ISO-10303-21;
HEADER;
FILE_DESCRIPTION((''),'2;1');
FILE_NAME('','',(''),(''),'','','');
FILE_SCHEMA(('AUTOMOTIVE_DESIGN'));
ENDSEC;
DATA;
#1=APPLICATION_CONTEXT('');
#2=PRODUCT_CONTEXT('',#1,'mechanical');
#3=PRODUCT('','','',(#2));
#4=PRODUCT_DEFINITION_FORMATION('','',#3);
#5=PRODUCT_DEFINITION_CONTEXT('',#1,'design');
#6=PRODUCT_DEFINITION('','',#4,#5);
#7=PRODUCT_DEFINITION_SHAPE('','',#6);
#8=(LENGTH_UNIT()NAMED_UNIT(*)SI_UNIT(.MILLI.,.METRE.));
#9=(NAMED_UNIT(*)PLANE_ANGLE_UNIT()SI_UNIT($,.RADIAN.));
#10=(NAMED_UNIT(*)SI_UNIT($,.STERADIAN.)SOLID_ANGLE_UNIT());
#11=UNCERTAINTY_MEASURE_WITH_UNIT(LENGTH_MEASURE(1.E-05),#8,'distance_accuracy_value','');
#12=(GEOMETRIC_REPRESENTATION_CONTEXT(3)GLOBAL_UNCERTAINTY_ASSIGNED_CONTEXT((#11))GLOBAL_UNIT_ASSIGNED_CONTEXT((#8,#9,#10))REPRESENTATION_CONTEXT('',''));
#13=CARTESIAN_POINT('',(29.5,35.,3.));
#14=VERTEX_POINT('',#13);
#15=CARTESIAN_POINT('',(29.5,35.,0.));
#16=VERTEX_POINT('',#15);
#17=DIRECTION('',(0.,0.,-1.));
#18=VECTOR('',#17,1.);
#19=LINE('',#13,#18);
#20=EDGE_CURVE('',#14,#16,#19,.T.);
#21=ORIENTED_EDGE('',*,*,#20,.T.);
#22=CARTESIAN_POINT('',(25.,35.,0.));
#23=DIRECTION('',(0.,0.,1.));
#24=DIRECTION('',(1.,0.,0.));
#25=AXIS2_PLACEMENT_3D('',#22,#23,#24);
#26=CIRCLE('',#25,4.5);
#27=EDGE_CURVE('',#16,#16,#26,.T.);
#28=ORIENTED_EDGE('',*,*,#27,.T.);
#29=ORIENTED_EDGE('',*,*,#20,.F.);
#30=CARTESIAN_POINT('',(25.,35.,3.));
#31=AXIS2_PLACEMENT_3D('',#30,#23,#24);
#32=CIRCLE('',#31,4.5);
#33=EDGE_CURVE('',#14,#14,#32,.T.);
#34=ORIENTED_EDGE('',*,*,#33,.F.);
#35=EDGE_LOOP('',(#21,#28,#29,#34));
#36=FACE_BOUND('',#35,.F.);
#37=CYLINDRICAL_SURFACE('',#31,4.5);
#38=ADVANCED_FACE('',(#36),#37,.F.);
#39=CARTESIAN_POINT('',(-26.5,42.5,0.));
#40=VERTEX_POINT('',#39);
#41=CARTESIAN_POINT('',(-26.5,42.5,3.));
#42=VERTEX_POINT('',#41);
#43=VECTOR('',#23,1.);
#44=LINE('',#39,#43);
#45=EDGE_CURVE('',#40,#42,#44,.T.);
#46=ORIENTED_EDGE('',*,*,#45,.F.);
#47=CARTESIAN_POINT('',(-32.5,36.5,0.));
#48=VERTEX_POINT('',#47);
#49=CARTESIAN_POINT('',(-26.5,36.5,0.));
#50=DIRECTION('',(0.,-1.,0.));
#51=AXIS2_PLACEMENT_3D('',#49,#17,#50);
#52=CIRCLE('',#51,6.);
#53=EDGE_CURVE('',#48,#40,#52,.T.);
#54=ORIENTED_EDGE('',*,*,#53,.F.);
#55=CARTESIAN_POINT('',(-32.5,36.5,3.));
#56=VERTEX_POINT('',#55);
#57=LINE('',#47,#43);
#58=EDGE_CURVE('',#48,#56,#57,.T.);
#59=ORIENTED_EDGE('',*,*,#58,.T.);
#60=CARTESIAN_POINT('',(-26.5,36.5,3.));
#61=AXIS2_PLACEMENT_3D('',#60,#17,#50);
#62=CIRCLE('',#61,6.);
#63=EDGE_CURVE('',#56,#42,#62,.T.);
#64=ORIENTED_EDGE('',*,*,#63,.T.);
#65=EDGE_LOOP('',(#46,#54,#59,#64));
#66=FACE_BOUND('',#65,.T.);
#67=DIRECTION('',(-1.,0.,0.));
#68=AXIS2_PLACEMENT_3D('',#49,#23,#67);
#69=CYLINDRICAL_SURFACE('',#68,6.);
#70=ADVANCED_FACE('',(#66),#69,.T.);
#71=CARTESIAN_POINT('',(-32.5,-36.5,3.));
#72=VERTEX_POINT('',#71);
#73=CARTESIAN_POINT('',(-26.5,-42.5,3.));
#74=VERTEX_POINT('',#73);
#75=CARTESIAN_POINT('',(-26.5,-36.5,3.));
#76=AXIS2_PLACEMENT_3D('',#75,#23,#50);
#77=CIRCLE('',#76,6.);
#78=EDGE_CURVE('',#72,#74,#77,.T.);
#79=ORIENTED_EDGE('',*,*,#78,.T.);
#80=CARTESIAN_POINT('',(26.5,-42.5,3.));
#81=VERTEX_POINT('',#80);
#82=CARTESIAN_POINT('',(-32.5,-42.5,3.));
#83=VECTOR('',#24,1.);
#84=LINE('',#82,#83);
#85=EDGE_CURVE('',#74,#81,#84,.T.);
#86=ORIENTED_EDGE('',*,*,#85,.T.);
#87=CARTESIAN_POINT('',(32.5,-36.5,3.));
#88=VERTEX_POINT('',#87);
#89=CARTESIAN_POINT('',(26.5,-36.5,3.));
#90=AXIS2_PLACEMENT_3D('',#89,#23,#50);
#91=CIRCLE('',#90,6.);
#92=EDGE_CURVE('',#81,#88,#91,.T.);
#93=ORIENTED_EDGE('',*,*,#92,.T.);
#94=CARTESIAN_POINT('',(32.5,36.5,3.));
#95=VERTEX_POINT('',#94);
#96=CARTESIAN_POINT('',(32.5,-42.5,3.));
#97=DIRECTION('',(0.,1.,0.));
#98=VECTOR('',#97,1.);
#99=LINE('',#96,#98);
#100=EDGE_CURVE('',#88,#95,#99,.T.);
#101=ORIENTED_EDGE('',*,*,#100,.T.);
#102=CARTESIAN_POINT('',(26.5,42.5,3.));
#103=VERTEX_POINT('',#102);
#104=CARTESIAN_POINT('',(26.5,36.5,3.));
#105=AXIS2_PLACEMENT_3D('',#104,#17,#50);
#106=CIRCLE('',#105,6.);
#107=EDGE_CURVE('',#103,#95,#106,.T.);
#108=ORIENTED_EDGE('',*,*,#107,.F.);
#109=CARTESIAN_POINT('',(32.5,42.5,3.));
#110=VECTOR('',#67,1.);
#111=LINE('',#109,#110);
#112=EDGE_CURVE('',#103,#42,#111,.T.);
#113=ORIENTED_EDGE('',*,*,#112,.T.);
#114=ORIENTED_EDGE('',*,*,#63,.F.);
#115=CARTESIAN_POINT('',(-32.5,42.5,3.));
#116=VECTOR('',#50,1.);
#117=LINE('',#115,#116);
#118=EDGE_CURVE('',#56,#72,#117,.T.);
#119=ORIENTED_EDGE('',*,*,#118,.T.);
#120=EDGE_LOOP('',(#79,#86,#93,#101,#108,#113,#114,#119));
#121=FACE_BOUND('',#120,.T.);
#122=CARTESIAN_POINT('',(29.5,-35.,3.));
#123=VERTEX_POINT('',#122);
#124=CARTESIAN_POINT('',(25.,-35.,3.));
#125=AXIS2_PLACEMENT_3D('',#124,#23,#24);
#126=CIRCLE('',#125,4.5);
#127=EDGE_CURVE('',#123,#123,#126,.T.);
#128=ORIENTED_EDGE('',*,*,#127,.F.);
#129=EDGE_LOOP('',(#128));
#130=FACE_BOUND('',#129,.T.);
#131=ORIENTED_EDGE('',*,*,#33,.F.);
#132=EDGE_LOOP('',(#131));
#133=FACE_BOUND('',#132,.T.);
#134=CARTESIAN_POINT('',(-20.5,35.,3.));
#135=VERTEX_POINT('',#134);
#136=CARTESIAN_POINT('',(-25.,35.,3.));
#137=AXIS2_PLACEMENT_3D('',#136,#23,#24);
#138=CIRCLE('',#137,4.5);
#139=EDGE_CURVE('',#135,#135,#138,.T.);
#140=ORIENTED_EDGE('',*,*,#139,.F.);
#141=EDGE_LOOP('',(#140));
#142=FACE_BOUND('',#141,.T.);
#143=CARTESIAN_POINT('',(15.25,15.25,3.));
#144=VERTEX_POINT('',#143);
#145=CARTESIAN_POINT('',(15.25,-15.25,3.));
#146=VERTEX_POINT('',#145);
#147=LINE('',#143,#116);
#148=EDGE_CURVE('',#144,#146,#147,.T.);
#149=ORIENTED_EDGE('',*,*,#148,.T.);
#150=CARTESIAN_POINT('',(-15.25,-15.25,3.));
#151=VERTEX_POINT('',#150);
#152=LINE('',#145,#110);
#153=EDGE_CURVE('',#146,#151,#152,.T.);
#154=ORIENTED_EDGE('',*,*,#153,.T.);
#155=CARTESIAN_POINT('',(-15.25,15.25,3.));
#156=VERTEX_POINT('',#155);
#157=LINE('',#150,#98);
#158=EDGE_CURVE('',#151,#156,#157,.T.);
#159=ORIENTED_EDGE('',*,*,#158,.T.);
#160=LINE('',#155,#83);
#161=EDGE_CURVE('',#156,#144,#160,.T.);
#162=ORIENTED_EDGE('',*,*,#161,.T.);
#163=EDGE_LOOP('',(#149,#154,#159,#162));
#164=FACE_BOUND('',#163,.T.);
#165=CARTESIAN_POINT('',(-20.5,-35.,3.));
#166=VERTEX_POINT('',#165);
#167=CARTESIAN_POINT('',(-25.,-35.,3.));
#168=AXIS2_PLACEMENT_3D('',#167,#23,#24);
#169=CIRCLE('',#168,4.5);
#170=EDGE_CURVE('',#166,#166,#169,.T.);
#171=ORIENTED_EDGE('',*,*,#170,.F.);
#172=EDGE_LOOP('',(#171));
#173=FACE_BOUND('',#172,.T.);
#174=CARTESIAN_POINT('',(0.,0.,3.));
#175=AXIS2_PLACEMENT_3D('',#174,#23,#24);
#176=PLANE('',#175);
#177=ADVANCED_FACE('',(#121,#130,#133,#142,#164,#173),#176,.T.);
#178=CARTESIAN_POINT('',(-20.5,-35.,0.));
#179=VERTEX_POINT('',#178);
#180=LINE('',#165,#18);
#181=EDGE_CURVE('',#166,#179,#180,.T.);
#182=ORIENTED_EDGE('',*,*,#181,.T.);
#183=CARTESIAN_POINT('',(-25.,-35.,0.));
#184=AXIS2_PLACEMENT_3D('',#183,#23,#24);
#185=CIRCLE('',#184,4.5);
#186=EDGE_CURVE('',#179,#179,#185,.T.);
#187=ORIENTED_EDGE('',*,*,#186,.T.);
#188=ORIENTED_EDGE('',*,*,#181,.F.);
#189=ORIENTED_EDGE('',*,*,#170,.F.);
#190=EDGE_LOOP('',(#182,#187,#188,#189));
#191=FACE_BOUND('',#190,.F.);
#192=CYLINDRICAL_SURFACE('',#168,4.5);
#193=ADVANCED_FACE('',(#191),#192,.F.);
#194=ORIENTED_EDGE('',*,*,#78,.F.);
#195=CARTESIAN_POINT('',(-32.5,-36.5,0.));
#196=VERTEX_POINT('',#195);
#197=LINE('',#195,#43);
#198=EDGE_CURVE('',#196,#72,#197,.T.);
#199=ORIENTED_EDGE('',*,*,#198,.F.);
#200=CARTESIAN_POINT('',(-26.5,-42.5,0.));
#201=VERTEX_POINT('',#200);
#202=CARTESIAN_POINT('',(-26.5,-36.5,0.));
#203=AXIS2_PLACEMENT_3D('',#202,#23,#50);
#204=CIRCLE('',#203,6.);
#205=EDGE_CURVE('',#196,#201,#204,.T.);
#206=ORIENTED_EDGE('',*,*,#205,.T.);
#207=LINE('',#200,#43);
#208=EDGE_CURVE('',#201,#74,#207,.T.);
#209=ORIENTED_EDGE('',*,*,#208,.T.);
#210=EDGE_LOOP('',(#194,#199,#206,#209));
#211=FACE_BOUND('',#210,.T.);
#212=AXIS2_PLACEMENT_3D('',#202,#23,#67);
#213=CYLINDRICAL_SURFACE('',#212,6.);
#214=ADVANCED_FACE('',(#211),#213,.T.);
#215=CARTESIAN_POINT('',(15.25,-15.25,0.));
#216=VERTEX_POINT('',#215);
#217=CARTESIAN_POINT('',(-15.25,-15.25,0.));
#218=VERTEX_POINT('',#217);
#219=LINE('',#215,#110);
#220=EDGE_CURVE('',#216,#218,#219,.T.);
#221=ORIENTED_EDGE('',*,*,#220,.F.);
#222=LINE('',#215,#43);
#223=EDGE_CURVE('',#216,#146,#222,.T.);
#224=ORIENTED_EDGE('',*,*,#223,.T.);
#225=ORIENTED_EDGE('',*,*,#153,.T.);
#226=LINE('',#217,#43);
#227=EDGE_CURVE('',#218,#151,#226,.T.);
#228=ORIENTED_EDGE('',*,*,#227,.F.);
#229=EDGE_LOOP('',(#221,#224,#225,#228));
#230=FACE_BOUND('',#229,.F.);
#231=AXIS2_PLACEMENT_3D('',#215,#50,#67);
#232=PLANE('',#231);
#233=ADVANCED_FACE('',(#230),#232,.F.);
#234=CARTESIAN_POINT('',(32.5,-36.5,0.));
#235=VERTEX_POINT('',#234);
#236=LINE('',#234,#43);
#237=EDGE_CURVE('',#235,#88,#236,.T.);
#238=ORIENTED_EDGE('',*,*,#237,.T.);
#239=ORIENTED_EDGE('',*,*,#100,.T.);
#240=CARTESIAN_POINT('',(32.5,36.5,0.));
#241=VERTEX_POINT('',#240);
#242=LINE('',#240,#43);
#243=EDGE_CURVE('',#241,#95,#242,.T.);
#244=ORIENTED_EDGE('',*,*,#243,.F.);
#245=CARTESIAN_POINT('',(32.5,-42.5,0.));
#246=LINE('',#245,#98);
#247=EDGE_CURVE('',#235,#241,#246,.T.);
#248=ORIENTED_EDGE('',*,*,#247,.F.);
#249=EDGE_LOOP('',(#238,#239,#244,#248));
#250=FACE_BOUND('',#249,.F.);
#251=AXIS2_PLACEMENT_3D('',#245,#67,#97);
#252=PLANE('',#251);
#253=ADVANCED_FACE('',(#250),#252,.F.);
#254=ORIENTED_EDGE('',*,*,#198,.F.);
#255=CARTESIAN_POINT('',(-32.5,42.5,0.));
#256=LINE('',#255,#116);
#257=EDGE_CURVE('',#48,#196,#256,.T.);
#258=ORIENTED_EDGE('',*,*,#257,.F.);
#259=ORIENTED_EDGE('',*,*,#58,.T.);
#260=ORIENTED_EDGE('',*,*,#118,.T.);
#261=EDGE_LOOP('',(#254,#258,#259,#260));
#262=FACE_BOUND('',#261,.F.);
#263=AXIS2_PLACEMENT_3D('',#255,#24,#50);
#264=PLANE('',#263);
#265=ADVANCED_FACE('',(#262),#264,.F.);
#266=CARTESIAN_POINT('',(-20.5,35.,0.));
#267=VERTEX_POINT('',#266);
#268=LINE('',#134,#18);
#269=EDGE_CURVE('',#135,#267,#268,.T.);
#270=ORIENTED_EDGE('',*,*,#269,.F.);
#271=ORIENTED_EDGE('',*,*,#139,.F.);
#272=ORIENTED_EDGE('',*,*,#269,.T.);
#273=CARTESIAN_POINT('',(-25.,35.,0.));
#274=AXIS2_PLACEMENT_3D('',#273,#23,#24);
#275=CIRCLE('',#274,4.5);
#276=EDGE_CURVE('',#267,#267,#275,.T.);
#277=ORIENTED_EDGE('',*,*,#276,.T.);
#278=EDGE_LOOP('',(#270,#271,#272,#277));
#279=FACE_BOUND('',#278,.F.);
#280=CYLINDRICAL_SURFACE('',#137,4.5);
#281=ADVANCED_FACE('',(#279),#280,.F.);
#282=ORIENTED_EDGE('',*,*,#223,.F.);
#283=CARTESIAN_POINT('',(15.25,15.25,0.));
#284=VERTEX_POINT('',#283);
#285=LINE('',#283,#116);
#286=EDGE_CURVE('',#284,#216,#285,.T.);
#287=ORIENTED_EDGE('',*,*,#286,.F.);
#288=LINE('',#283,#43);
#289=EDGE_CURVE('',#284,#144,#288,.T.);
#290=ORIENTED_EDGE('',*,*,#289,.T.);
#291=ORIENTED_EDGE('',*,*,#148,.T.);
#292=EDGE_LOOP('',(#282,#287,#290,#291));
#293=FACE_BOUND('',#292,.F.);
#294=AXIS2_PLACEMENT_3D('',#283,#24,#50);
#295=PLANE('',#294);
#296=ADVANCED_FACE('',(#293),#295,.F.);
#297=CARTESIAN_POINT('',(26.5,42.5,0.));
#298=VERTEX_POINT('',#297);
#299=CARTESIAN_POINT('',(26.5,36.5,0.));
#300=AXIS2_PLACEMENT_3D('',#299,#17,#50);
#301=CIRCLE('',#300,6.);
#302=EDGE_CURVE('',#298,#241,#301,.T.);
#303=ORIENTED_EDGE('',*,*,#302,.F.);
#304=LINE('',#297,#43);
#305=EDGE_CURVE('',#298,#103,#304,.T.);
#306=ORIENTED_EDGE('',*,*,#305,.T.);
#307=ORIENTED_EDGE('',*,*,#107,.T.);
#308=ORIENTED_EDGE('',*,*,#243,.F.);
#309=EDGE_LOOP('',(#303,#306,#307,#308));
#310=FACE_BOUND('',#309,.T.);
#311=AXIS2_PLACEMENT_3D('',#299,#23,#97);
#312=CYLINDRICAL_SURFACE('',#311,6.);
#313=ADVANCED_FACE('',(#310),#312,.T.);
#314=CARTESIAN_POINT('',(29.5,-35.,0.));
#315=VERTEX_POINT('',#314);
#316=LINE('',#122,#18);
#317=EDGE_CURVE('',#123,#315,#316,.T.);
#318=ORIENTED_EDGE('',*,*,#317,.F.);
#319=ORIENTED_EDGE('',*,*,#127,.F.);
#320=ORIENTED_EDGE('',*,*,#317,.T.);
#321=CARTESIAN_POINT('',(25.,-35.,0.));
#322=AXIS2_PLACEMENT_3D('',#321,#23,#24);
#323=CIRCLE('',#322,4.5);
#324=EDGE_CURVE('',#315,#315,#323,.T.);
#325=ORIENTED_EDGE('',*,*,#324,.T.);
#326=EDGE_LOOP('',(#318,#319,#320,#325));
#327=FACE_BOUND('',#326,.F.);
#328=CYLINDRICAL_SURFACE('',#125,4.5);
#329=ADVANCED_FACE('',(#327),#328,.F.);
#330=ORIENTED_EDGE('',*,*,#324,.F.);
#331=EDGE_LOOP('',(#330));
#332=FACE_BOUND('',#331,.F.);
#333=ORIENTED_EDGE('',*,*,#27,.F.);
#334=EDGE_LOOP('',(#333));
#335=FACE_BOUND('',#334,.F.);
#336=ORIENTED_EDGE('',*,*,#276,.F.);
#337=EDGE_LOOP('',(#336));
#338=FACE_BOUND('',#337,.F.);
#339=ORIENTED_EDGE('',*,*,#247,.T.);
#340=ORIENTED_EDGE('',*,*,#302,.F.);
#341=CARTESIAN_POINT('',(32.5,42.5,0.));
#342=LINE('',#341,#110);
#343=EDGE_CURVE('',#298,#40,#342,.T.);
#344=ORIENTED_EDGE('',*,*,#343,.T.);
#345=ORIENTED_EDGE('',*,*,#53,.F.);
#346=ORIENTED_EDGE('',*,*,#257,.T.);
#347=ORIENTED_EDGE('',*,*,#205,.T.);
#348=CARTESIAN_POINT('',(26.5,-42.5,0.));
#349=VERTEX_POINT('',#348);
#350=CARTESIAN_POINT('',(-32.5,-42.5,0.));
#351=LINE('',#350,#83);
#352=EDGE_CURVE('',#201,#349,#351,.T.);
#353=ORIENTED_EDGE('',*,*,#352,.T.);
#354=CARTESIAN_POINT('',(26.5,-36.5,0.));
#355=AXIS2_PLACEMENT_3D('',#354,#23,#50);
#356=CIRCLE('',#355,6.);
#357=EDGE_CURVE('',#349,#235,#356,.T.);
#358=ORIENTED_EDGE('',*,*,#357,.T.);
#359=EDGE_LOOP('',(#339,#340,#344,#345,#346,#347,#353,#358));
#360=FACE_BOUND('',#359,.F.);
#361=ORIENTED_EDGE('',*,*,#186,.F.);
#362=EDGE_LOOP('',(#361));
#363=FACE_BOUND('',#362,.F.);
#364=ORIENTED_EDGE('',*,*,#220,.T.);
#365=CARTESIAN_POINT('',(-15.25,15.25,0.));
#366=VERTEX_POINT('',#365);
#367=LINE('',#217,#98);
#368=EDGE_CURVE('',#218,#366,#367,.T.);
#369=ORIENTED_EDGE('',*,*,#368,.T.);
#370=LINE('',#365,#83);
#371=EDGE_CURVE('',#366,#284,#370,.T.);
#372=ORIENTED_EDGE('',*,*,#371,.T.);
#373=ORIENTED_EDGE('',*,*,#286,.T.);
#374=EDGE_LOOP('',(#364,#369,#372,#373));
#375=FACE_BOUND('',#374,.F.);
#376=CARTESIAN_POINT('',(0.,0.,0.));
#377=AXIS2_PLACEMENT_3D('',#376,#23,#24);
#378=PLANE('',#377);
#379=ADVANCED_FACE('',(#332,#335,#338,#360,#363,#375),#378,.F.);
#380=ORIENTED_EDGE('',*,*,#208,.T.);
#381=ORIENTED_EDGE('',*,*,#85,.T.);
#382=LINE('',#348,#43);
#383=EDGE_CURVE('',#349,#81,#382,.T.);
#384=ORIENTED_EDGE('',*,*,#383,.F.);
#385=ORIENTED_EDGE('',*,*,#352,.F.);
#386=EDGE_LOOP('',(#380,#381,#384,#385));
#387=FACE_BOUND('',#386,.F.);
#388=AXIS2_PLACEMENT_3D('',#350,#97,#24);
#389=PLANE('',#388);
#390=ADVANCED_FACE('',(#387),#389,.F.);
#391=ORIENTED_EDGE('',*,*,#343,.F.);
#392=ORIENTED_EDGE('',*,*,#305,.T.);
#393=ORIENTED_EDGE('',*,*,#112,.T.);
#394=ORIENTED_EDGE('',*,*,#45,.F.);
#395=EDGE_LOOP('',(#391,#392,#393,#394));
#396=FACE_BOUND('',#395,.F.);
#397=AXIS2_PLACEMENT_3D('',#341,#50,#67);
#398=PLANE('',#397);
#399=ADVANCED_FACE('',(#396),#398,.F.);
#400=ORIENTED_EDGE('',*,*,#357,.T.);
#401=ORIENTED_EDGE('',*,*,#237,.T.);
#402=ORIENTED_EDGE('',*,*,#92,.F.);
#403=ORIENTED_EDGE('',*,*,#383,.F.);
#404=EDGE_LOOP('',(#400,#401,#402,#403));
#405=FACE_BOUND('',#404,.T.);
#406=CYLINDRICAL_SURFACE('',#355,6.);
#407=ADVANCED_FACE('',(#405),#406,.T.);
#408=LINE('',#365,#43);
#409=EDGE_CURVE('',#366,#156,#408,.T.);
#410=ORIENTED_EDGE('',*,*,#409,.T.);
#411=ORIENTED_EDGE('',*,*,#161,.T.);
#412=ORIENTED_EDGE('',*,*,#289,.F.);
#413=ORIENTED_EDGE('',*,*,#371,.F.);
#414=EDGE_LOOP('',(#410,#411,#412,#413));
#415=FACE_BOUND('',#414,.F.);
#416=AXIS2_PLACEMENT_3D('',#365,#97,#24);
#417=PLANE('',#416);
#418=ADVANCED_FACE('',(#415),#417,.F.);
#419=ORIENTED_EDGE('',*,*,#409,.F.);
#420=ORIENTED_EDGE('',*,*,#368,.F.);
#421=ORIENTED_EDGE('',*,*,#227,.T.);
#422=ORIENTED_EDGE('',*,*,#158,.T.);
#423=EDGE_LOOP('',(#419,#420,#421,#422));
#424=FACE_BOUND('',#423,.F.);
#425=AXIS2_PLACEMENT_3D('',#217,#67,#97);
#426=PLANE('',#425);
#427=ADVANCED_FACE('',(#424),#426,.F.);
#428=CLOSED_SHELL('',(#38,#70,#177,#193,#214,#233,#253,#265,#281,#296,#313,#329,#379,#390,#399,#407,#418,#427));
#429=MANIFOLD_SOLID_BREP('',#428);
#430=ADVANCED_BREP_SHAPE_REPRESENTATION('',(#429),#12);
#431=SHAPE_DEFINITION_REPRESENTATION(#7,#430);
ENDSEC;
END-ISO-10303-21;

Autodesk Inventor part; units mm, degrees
ref_plane "YZ Plane" through (0, 0, 0) normal (1, 0, 0) x (0, 1, 0)
ref_plane "XZ Plane" through (0, 0, 0) normal (0, 1, 0) x (-1, 0, 0)
ref_plane "XY Plane" through (0, 0, 0) normal (0, 0, 1) x (1, 0, 0)
sketch "Sketch1" plane through (0, 0, 0) normal (0, 0, 1) x (1, 0, 0)
  line L0 (-32.5, -42.5) -> (32.5, -42.5)
  line L1 (32.5, -42.5) -> (32.5, 42.5)
  line L2 (32.5, 42.5) -> (-32.5, 42.5)
  line L3 (-32.5, 42.5) -> (-32.5, -42.5)
  line L4 (-32.5, -42.5) -> (32.5, 42.5) construction
  line L5 (32.5, -42.5) -> (-32.5, 42.5) construction
  line L6 (15.25, -15.25) -> (-15.25, -15.25)
  line L7 (-15.25, -15.25) -> (-15.25, 15.25)
  line L8 (-15.25, 15.25) -> (15.25, 15.25)
  line L9 (15.25, 15.25) -> (15.25, -15.25)
  line L10 (15.25, -15.25) -> (-15.25, 15.25) construction
  line L11 (-15.25, -15.25) -> (15.25, 15.25) construction
  point P0 (0, 0)
  dimension "d154" = 65
  dimension "d155" = 85
  dimension "d172" = 30.5
extrude "Plate5" add sketch "Sketch1" along normal blind 3
sketch "Sketch9" plane through (0, 0, 3) normal (0, 0, 1) x (1, 0, 0)
  circle A0 centre (25, -35) radius 4.5
  line L0 (25, 35) -> (-25, 35) construction
  line L1 (-25, 35) -> (-25, -35) construction
  line L2 (-25, -35) -> (25, -35) construction
  line L3 (25, -35) -> (25, 35) construction
  line L4 (25, 35) -> (-25, -35) construction
  line L5 (-25, 35) -> (25, -35) construction
  circle A1 centre (-25, -35) radius 4.5
  circle A2 centre (25, 35) radius 4.5
  circle A3 centre (-25, 35) radius 4.5
  point P0 (0, 0)
  dimension "d173" = 70
  dimension "d174" = 9
  dimension "d175" = 50
extrude "Cut2" cut sketch "Sketch9" against normal blind 3
fillet "Corner Round1" radius 6 4 edges at (32.5, 42.5, 1.5) (-32.5, 42.5, 1.5) (-32.5, -42.5, 1.5) (32.5, -42.5, 1.5)
properties part number "PNS 760 FDS 1200 FLANGE 3" material "Stainless Steel"
